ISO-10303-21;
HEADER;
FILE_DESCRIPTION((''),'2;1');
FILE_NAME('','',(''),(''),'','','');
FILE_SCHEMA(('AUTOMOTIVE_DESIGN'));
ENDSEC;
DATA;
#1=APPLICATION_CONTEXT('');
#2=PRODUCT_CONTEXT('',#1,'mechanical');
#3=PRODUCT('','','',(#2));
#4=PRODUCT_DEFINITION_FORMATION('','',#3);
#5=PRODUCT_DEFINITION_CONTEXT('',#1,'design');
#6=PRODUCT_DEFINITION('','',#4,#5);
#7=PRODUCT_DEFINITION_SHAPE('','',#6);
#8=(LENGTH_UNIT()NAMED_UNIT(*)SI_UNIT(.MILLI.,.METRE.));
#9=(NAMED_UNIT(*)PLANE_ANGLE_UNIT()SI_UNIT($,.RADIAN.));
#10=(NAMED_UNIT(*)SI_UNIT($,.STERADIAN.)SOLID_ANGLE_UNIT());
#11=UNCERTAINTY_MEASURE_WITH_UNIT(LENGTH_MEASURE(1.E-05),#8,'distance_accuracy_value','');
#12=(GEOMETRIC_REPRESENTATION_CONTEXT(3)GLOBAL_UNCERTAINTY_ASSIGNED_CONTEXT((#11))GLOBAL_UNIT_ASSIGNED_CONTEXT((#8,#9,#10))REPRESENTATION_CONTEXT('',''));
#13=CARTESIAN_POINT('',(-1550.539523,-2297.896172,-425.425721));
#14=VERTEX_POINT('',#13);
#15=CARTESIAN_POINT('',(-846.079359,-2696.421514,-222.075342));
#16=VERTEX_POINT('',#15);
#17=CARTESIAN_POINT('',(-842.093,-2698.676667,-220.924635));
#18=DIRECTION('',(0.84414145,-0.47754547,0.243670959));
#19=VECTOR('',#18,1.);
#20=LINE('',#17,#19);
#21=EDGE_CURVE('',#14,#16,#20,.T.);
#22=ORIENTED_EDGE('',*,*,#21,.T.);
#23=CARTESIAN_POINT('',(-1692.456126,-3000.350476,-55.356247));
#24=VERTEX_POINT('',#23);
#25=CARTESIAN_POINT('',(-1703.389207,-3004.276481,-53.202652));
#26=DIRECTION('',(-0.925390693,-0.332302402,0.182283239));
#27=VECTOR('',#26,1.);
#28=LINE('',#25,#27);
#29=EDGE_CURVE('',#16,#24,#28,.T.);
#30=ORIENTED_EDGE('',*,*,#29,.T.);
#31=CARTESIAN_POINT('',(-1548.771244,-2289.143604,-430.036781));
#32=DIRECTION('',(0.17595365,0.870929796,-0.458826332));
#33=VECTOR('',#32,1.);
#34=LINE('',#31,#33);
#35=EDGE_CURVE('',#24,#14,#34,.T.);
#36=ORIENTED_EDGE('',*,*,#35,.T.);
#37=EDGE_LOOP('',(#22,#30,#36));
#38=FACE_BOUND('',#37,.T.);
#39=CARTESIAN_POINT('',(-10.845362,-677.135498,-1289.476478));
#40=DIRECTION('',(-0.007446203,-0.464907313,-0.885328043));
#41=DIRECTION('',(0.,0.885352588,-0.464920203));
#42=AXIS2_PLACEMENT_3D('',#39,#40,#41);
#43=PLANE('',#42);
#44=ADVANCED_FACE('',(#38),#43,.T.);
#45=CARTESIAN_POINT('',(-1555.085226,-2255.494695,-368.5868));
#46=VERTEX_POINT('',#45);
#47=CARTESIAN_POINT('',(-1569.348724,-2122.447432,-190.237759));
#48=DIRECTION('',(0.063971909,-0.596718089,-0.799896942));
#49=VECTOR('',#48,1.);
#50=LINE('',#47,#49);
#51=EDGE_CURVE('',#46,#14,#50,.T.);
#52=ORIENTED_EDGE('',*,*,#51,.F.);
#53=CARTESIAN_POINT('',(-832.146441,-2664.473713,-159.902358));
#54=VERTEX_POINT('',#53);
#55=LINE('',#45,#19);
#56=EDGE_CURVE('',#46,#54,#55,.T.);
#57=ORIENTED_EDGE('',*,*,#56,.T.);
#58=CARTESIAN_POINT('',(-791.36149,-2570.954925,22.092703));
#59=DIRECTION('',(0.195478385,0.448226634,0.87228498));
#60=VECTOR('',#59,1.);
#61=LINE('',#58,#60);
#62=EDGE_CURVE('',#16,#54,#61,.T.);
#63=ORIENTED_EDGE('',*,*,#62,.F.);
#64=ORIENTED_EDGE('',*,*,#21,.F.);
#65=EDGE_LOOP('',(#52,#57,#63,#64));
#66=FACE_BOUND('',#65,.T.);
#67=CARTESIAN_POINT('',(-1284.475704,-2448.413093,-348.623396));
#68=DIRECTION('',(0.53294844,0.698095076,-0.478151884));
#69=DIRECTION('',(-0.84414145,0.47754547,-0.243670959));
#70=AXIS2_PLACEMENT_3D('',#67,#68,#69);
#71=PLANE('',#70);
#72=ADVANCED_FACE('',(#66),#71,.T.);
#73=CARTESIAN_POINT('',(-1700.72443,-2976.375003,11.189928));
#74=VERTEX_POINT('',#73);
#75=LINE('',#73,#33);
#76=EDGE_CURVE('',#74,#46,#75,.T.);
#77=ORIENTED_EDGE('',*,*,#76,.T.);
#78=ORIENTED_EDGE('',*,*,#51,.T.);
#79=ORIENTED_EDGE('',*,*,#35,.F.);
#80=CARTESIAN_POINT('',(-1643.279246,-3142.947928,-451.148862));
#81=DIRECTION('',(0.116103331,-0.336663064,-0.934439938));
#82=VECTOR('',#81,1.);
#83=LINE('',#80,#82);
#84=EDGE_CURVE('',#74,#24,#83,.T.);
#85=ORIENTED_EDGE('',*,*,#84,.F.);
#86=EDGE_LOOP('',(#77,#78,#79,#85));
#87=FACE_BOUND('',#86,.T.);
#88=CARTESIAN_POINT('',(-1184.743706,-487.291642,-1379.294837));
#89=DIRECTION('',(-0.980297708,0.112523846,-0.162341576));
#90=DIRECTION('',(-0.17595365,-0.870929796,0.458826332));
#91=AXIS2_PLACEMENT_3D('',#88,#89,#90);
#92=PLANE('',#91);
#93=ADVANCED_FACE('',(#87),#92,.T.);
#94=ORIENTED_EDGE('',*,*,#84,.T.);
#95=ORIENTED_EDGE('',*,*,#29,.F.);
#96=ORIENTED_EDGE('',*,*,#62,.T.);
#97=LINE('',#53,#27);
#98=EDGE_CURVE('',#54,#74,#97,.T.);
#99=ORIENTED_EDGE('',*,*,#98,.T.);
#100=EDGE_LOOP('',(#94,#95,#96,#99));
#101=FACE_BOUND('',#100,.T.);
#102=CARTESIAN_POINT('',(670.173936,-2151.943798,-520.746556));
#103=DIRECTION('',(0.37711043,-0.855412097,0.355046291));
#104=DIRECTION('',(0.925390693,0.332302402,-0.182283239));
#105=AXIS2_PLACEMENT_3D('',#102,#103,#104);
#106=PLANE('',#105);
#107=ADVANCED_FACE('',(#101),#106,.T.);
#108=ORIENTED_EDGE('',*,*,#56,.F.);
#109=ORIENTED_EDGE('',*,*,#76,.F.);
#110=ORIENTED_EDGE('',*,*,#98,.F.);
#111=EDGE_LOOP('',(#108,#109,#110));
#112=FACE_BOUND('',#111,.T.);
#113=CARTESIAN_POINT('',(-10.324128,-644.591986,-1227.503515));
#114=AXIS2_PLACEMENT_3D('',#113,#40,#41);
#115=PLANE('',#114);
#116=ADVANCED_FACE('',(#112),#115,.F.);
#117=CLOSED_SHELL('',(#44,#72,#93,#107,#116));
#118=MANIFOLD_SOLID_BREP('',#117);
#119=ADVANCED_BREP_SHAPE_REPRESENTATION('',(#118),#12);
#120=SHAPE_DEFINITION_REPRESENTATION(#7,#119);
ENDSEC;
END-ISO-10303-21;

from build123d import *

# Parameters (mm, degrees)
BOSS_EXTRUDE1_DEPTH = 70
CHAMFER1_SIZE2      = 5.656659752
CHAMFER1_SIZE       = 70
CHAMFER2_SIZE2      = 70
CHAMFER2_SIZE       = 6.943744914
CHAMFER3_SIZE2      = 6.666257335
CHAMFER3_SIZE       = 70


with BuildPart() as part:
    # Sketch1 → Boss-Extrude1 (new body)
    with BuildSketch(Plane(origin=(-9.889310543, -592.27380366, -1254.98072345), x_dir=(0.9998495453727724, -0.017332267315879432, 0.0006921904012523395), z_dir=(-0.007446202576901621, -0.46490731349894177, -0.8853280431130489))):
        Polygon((-1515.522491278, 1908.617278557), (-785.459493052, 2356.346592467), (-1648.382414563, 2725.598184499), align=None)
    extrude(amount=BOSS_EXTRUDE1_DEPTH)

    # Chamfer1
    chamfer1_edges = [part.edges().sort_by_distance(p)[0] for p in [
        (-1266.956669693, -2852.967870133, -136.329178409),
    ]]
    chamfer1_side = [part.faces().sort_by_distance(p)[0] for p in [
        (-1266.95582728, -2852.915273683, -136.229018419),
    ]]
    chamfer(chamfer1_edges, length=CHAMFER1_SIZE - 0.0001, length2=CHAMFER1_SIZE2 - 0.0001, reference=chamfer1_side[0])  # a hair under: the kernel refuses the full size

    # Chamfer2
    chamfer2_edges = [part.edges().sort_by_distance(p)[0] for p in [
        (-1627.836641831, -2645.560867546, -242.208403318),
    ]]
    chamfer2_side = [part.faces().sort_by_distance(p)[0] for p in [
        (-1627.699937507, -2645.582975488, -242.197943675),
    ]]
    chamfer(chamfer2_edges, length=CHAMFER2_SIZE - 0.0001, length2=CHAMFER2_SIZE2 - 0.0001, reference=chamfer2_side[0])  # a hair under: the kernel refuses the full size

    # Chamfer3
    chamfer3_edges = [part.edges().sort_by_distance(p)[0] for p in [
        (-1193.89566166, -2492.66428344, -326.14785738),
    ]]
    chamfer3_side = [part.faces().sort_by_distance(p)[0] for p in [
        (-1193.894668894, -2492.602299605, -326.029820889),
    ]]
    chamfer(chamfer3_edges, length=CHAMFER3_SIZE - 0.0001, length2=CHAMFER3_SIZE2 - 0.0001, reference=chamfer3_side[0])  # a hair under: the kernel refuses the full size


solid = part.part
